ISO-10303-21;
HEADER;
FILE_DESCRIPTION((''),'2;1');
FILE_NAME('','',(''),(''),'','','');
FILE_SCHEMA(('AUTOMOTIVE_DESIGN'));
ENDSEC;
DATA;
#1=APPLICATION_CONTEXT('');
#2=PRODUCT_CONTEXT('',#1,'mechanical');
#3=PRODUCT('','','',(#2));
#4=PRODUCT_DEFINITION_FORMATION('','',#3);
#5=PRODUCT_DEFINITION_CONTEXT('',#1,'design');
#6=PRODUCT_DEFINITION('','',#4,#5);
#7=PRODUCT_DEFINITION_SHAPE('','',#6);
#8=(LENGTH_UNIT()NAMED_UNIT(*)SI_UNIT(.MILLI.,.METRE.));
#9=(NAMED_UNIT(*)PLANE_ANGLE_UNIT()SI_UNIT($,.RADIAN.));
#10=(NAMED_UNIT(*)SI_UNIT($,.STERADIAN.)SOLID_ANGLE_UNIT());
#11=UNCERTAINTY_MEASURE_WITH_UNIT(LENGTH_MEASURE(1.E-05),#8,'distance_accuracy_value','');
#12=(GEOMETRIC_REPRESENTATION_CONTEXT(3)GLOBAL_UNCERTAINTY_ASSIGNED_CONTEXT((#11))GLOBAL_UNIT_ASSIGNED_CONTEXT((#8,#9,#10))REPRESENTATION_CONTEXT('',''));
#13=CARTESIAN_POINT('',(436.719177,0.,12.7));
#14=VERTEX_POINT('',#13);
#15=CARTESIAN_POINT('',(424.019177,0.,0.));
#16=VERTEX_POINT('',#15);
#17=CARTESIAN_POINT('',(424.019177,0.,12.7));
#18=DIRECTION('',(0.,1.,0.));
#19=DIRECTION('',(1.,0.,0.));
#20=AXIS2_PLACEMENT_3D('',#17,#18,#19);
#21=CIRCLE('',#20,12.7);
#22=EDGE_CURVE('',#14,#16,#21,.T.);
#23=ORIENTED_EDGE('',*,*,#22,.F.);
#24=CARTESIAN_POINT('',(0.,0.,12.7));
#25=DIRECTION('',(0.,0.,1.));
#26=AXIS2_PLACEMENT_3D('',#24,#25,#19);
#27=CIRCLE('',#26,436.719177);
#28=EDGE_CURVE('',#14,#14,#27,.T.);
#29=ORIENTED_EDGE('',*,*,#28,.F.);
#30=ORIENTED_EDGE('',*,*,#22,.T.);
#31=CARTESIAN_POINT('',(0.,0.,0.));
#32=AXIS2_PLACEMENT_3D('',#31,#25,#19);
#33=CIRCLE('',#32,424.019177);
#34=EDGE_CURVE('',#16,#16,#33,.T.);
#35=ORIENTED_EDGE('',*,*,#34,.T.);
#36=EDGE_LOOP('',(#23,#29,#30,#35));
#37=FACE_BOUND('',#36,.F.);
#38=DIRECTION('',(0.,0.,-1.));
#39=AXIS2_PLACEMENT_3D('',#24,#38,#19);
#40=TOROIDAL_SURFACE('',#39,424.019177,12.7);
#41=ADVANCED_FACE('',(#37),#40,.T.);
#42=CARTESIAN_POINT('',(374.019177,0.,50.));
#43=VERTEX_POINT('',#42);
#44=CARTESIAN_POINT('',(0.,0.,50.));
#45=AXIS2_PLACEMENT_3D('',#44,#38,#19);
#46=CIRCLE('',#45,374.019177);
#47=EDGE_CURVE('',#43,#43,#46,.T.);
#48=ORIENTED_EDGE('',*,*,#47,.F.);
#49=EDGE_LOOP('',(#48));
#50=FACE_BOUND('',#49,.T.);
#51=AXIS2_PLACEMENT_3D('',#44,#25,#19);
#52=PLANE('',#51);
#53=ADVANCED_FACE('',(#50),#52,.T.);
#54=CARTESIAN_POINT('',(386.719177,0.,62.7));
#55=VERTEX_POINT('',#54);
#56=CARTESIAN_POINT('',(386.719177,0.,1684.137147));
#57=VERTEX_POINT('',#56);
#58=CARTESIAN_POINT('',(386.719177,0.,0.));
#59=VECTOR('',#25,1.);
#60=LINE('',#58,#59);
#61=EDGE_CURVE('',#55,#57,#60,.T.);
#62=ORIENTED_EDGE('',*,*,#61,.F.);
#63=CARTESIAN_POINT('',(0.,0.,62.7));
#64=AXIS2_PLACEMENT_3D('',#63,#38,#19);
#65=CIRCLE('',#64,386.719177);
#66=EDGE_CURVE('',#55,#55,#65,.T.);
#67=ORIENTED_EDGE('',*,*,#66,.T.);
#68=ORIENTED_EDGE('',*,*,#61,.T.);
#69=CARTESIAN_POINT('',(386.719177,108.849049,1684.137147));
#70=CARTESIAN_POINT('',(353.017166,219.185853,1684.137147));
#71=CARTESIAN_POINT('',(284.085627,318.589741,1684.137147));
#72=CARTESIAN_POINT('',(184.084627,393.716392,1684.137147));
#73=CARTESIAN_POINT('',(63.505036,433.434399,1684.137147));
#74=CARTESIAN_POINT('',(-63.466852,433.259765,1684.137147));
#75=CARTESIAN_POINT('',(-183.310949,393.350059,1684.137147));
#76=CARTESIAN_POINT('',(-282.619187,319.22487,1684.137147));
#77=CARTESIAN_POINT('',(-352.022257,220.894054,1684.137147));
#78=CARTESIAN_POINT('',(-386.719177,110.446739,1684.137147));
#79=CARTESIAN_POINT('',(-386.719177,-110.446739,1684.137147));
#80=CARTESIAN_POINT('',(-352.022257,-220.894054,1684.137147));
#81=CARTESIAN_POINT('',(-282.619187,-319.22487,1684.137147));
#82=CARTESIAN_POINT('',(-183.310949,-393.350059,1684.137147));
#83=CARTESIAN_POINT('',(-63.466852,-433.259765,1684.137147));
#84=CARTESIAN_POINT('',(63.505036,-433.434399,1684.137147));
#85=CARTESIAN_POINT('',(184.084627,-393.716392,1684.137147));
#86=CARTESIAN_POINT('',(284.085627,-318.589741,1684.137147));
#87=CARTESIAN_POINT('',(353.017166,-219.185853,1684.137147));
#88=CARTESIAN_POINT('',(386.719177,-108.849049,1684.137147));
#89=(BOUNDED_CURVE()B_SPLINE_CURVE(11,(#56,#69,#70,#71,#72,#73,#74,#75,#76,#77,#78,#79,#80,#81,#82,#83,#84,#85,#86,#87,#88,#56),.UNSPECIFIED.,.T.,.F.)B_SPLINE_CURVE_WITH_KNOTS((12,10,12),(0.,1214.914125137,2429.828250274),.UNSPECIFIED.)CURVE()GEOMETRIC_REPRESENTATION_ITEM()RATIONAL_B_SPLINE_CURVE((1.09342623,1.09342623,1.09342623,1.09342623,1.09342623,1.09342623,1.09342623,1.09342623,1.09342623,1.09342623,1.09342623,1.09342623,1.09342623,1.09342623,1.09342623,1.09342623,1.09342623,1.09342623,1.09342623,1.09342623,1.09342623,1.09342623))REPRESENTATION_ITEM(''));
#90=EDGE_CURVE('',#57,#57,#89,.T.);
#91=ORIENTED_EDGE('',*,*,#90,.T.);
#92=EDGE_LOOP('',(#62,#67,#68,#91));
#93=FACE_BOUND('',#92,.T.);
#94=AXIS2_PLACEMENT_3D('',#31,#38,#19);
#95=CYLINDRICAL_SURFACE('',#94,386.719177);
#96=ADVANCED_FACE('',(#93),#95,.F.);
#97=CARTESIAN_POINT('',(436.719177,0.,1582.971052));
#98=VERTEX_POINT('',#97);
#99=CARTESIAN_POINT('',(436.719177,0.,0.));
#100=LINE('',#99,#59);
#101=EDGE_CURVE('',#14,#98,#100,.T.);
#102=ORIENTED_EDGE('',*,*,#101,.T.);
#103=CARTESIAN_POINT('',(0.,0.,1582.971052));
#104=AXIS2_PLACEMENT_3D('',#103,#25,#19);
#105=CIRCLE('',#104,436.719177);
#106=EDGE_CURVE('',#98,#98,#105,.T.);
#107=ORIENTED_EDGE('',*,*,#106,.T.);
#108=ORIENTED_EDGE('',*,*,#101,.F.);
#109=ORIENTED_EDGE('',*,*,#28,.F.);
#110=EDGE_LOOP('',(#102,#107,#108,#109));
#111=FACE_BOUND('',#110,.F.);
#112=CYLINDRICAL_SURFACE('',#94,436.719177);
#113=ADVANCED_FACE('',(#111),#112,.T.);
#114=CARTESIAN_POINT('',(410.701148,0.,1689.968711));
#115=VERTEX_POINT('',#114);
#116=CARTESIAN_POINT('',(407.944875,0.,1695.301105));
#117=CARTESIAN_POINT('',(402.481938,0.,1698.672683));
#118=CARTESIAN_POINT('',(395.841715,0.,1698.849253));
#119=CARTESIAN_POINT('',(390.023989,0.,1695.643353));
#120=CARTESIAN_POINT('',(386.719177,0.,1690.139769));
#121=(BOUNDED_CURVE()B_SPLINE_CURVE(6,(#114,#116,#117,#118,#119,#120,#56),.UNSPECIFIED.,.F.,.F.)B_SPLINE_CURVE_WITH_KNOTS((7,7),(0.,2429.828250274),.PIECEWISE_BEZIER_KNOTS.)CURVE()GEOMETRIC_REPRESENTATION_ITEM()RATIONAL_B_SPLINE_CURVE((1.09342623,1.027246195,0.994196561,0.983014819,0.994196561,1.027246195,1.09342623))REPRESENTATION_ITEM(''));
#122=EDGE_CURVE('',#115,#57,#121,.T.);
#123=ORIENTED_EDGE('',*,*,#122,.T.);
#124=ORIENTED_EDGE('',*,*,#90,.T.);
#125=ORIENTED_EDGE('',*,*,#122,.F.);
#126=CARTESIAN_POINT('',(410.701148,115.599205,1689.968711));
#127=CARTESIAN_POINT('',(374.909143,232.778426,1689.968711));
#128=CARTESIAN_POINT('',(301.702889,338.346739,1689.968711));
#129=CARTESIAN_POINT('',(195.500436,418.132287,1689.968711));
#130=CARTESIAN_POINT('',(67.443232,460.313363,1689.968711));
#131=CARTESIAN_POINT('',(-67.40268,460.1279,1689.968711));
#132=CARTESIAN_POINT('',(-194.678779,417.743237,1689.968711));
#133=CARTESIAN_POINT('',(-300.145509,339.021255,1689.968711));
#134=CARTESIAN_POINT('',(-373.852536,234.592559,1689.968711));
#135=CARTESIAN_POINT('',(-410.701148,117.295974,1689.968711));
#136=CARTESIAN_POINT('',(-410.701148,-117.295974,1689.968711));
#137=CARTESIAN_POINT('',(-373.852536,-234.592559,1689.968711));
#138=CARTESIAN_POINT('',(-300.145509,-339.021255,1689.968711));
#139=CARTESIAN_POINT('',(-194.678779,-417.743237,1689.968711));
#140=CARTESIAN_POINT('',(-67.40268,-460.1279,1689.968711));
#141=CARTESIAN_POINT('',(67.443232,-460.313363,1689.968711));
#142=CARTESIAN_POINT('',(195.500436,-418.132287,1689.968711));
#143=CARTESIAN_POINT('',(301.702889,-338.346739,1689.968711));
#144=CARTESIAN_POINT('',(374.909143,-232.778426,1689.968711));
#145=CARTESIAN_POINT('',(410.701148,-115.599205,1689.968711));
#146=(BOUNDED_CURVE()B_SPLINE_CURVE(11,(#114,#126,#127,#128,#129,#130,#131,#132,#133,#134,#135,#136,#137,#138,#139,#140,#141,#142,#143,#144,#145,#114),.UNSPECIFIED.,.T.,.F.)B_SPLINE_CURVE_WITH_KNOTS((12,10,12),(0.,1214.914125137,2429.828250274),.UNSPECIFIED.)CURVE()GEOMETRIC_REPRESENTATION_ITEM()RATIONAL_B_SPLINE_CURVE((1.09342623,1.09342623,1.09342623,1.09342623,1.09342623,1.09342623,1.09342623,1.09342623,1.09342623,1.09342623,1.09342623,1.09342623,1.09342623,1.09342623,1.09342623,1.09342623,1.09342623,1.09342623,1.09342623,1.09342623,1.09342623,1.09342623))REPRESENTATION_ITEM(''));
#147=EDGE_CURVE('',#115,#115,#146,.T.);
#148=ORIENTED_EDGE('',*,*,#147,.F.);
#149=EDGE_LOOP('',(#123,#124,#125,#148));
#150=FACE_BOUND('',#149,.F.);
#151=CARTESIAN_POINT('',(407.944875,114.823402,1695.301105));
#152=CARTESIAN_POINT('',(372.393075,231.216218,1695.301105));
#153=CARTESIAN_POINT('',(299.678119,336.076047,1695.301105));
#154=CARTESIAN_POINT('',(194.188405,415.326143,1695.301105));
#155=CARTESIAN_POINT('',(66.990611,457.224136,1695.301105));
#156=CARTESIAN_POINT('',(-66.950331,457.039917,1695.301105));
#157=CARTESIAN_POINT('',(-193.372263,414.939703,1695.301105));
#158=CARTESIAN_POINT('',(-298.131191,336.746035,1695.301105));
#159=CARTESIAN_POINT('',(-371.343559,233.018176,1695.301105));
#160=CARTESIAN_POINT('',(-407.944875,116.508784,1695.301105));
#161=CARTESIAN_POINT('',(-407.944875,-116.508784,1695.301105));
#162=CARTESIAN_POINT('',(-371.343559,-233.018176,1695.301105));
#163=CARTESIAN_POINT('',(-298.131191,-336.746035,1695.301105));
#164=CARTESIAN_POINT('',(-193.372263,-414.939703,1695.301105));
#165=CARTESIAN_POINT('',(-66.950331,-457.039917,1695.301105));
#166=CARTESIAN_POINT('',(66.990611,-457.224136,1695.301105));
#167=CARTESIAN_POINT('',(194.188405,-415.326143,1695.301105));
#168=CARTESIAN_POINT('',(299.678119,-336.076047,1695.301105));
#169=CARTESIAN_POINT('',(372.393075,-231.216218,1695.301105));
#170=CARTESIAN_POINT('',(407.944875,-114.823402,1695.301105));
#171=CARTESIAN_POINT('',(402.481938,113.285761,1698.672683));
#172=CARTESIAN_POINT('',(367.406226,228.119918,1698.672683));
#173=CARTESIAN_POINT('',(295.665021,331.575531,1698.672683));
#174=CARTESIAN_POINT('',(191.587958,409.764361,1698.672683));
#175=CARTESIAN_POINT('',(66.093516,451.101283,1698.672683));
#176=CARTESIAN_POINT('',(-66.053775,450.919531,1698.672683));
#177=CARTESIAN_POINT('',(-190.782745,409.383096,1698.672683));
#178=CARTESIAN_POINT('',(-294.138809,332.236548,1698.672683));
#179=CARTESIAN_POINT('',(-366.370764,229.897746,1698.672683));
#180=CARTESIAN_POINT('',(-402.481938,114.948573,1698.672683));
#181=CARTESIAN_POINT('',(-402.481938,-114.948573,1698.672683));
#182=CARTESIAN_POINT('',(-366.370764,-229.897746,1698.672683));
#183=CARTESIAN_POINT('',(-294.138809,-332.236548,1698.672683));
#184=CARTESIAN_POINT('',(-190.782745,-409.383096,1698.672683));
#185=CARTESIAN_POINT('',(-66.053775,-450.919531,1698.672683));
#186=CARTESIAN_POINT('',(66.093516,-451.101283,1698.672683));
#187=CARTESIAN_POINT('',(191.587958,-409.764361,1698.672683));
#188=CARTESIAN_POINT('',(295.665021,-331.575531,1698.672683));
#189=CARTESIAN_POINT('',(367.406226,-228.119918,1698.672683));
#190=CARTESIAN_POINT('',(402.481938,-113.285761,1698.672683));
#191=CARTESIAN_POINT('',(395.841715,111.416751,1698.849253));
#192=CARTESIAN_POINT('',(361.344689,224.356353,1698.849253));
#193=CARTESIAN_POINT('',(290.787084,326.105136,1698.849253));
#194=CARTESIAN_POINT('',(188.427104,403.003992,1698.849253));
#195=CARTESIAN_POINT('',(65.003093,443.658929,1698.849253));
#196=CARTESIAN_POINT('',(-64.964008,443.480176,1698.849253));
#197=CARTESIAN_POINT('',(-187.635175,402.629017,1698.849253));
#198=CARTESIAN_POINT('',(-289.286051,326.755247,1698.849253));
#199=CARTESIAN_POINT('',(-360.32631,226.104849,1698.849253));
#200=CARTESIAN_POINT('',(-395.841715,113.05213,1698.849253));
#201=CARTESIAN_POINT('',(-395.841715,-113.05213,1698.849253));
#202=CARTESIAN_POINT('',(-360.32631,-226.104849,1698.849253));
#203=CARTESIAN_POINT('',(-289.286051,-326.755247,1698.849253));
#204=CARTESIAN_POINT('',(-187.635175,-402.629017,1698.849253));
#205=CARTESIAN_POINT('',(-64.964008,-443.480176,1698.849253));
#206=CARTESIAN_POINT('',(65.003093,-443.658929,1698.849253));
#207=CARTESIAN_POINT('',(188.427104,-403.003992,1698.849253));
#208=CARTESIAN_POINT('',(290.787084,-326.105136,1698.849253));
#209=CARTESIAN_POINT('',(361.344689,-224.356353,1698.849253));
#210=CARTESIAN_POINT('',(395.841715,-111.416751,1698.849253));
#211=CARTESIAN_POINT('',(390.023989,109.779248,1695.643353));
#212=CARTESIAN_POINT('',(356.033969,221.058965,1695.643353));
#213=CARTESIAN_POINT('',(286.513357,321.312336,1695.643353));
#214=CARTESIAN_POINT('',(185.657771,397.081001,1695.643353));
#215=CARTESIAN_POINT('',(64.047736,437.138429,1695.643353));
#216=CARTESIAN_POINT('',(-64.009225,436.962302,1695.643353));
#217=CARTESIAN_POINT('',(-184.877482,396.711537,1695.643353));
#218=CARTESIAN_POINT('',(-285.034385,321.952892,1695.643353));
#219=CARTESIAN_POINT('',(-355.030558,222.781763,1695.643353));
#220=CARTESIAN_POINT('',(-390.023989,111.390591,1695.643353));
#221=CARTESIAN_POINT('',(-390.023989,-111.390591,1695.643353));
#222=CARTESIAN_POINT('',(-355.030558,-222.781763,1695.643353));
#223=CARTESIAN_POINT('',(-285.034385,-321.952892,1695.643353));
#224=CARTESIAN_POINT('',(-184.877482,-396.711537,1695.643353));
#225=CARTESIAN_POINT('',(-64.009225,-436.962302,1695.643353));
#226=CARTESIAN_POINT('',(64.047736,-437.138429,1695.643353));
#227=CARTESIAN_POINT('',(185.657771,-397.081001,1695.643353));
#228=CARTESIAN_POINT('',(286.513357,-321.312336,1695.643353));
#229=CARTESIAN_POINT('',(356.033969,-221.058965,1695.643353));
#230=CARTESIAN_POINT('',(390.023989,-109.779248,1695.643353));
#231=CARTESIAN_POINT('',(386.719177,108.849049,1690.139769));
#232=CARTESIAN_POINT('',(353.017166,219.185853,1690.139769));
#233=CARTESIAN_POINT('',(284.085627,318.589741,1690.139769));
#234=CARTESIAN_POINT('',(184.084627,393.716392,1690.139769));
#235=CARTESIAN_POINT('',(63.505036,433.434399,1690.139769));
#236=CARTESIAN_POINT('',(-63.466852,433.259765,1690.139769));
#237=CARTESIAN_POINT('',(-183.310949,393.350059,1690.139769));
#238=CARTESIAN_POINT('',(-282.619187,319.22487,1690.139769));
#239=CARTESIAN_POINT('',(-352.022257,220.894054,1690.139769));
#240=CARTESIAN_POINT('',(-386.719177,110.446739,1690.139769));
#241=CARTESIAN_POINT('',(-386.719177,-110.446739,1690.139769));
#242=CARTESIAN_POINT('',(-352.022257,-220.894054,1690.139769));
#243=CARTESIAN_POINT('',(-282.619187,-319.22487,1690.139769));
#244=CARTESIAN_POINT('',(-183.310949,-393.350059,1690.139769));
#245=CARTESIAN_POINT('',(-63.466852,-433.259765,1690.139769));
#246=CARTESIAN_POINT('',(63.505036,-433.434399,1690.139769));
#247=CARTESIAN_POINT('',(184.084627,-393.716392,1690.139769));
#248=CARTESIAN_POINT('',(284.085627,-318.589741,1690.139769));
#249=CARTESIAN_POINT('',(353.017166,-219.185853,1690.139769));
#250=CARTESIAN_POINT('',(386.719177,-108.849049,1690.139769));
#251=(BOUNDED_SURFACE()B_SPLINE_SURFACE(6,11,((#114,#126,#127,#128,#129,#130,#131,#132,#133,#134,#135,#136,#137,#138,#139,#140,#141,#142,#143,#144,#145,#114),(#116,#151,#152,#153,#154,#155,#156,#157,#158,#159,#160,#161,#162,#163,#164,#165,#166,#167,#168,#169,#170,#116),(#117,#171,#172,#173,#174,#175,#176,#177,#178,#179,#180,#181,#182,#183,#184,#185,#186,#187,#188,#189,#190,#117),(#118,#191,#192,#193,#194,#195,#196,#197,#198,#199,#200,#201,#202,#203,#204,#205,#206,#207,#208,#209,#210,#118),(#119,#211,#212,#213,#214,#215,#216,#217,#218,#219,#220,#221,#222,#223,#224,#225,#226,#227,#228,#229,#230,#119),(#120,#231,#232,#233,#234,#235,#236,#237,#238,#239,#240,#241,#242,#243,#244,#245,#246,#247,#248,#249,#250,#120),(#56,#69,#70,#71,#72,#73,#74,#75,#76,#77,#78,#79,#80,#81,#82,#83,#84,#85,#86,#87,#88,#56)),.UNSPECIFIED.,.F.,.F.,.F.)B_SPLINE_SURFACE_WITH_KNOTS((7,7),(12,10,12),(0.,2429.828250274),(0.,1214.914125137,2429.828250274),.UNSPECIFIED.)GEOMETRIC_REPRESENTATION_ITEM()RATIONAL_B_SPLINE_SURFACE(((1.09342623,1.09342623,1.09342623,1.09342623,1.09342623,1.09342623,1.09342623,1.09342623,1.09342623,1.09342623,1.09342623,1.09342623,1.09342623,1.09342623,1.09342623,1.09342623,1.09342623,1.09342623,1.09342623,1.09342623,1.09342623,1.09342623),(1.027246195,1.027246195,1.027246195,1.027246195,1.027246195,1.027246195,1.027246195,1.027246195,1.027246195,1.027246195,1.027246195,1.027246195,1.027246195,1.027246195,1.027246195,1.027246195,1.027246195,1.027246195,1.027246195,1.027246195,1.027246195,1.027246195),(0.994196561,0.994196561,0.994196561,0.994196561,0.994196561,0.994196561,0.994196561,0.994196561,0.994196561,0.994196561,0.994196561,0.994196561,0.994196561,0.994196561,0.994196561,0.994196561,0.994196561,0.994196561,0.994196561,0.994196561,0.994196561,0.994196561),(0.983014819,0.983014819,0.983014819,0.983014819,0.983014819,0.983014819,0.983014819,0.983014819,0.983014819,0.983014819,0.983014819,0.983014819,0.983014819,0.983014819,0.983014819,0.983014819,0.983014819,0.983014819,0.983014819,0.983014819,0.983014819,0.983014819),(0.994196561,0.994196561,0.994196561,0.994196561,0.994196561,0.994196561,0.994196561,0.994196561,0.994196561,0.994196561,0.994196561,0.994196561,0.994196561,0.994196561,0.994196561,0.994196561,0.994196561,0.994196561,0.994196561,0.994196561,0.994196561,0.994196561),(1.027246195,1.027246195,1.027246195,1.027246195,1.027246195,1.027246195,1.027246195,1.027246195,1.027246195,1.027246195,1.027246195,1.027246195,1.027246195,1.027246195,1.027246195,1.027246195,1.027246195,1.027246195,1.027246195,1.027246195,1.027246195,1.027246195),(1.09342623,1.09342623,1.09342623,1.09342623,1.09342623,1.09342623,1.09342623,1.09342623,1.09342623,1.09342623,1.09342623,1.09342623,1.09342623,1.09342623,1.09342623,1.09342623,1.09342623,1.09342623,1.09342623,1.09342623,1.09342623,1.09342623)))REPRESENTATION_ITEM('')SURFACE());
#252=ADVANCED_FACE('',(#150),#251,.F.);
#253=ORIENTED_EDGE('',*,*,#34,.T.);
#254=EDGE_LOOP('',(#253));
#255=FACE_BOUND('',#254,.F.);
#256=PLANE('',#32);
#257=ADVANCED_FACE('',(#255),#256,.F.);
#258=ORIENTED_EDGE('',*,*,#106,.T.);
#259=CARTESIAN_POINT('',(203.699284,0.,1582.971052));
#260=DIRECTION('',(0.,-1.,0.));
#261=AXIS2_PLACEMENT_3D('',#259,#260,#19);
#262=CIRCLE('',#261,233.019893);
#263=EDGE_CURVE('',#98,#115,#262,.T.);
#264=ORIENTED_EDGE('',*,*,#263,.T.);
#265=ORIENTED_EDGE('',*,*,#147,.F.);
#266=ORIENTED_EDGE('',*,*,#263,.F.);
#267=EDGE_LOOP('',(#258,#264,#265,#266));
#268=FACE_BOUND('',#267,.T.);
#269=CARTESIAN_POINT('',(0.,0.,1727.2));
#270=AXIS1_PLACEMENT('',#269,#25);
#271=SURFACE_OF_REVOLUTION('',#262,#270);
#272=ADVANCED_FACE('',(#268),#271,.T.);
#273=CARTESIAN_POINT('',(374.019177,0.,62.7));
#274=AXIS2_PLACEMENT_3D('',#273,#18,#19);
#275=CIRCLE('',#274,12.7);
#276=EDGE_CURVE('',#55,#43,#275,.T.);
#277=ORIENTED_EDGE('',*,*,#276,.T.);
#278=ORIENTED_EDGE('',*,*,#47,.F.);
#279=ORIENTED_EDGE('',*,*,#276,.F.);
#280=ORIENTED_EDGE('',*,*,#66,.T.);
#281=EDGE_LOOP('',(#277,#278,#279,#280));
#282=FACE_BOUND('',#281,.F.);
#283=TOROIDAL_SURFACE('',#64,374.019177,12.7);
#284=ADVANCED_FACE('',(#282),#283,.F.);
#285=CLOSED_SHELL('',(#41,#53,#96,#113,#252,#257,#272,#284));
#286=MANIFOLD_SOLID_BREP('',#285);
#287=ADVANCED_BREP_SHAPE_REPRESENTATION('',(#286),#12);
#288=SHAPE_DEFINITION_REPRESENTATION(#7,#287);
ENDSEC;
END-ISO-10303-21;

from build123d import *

# Parameters (mm, degrees)
F0_R     = 436.7191768954
F1_DEPTH = 1727.2
F2_T     = -50
F4_R     = 12.7


# Not quite as in the source:
# - a fillet or chamfer that OpenCascade refuses, or shapes differently, is made with other operations: its cross-section is extruded or revolved along the edge and cut away or added


with BuildPart() as f1:
    # F0 (on Top) → F1 (new body)
    with BuildSketch(Plane.XY):
        Circle(F0_R)
    extrude(amount=F1_DEPTH)

    # F2
    f2_openings = [f1.faces().sort_by_distance(p)[0] for p in [
        (0, 0, 1727.2),
    ]]
    offset(amount=F2_T, openings=f2_openings)

    # F3: fillet of radius 233.0198930403 on 1 edges, made by hand

    # F3_s1 → F3_t2 (revolve, cut)
    with BuildSketch(Plane.XZ):
        with BuildLine():
            ThreePointArc((436.7191768954, 1582.9710524755), (423.8646154278, 1659.2959981093), (386.7191768954, 1727.2))
            Line((386.7191768954, 1727.2), (436.7191768954, 1727.2))
            Line((436.7191768954, 1727.2), (436.7191768954, 1582.9710524755))
        make_face()
    revolve(axis=Axis((0, 0, 1727.2), (0, 0, 1)), mode=Mode.SUBTRACT)

    # F4
    f4_edges = [f1.edges().sort_by_distance(p)[0] for p in [
        (-436.719177, 0, 0),
        (-386.719177, 0, 50),
        (386.719177, 0, 888.6),
        (-386.719177, 0, 1727.2),
    ]]
    fillet(f4_edges, radius=F4_R)


solid = f1.part
